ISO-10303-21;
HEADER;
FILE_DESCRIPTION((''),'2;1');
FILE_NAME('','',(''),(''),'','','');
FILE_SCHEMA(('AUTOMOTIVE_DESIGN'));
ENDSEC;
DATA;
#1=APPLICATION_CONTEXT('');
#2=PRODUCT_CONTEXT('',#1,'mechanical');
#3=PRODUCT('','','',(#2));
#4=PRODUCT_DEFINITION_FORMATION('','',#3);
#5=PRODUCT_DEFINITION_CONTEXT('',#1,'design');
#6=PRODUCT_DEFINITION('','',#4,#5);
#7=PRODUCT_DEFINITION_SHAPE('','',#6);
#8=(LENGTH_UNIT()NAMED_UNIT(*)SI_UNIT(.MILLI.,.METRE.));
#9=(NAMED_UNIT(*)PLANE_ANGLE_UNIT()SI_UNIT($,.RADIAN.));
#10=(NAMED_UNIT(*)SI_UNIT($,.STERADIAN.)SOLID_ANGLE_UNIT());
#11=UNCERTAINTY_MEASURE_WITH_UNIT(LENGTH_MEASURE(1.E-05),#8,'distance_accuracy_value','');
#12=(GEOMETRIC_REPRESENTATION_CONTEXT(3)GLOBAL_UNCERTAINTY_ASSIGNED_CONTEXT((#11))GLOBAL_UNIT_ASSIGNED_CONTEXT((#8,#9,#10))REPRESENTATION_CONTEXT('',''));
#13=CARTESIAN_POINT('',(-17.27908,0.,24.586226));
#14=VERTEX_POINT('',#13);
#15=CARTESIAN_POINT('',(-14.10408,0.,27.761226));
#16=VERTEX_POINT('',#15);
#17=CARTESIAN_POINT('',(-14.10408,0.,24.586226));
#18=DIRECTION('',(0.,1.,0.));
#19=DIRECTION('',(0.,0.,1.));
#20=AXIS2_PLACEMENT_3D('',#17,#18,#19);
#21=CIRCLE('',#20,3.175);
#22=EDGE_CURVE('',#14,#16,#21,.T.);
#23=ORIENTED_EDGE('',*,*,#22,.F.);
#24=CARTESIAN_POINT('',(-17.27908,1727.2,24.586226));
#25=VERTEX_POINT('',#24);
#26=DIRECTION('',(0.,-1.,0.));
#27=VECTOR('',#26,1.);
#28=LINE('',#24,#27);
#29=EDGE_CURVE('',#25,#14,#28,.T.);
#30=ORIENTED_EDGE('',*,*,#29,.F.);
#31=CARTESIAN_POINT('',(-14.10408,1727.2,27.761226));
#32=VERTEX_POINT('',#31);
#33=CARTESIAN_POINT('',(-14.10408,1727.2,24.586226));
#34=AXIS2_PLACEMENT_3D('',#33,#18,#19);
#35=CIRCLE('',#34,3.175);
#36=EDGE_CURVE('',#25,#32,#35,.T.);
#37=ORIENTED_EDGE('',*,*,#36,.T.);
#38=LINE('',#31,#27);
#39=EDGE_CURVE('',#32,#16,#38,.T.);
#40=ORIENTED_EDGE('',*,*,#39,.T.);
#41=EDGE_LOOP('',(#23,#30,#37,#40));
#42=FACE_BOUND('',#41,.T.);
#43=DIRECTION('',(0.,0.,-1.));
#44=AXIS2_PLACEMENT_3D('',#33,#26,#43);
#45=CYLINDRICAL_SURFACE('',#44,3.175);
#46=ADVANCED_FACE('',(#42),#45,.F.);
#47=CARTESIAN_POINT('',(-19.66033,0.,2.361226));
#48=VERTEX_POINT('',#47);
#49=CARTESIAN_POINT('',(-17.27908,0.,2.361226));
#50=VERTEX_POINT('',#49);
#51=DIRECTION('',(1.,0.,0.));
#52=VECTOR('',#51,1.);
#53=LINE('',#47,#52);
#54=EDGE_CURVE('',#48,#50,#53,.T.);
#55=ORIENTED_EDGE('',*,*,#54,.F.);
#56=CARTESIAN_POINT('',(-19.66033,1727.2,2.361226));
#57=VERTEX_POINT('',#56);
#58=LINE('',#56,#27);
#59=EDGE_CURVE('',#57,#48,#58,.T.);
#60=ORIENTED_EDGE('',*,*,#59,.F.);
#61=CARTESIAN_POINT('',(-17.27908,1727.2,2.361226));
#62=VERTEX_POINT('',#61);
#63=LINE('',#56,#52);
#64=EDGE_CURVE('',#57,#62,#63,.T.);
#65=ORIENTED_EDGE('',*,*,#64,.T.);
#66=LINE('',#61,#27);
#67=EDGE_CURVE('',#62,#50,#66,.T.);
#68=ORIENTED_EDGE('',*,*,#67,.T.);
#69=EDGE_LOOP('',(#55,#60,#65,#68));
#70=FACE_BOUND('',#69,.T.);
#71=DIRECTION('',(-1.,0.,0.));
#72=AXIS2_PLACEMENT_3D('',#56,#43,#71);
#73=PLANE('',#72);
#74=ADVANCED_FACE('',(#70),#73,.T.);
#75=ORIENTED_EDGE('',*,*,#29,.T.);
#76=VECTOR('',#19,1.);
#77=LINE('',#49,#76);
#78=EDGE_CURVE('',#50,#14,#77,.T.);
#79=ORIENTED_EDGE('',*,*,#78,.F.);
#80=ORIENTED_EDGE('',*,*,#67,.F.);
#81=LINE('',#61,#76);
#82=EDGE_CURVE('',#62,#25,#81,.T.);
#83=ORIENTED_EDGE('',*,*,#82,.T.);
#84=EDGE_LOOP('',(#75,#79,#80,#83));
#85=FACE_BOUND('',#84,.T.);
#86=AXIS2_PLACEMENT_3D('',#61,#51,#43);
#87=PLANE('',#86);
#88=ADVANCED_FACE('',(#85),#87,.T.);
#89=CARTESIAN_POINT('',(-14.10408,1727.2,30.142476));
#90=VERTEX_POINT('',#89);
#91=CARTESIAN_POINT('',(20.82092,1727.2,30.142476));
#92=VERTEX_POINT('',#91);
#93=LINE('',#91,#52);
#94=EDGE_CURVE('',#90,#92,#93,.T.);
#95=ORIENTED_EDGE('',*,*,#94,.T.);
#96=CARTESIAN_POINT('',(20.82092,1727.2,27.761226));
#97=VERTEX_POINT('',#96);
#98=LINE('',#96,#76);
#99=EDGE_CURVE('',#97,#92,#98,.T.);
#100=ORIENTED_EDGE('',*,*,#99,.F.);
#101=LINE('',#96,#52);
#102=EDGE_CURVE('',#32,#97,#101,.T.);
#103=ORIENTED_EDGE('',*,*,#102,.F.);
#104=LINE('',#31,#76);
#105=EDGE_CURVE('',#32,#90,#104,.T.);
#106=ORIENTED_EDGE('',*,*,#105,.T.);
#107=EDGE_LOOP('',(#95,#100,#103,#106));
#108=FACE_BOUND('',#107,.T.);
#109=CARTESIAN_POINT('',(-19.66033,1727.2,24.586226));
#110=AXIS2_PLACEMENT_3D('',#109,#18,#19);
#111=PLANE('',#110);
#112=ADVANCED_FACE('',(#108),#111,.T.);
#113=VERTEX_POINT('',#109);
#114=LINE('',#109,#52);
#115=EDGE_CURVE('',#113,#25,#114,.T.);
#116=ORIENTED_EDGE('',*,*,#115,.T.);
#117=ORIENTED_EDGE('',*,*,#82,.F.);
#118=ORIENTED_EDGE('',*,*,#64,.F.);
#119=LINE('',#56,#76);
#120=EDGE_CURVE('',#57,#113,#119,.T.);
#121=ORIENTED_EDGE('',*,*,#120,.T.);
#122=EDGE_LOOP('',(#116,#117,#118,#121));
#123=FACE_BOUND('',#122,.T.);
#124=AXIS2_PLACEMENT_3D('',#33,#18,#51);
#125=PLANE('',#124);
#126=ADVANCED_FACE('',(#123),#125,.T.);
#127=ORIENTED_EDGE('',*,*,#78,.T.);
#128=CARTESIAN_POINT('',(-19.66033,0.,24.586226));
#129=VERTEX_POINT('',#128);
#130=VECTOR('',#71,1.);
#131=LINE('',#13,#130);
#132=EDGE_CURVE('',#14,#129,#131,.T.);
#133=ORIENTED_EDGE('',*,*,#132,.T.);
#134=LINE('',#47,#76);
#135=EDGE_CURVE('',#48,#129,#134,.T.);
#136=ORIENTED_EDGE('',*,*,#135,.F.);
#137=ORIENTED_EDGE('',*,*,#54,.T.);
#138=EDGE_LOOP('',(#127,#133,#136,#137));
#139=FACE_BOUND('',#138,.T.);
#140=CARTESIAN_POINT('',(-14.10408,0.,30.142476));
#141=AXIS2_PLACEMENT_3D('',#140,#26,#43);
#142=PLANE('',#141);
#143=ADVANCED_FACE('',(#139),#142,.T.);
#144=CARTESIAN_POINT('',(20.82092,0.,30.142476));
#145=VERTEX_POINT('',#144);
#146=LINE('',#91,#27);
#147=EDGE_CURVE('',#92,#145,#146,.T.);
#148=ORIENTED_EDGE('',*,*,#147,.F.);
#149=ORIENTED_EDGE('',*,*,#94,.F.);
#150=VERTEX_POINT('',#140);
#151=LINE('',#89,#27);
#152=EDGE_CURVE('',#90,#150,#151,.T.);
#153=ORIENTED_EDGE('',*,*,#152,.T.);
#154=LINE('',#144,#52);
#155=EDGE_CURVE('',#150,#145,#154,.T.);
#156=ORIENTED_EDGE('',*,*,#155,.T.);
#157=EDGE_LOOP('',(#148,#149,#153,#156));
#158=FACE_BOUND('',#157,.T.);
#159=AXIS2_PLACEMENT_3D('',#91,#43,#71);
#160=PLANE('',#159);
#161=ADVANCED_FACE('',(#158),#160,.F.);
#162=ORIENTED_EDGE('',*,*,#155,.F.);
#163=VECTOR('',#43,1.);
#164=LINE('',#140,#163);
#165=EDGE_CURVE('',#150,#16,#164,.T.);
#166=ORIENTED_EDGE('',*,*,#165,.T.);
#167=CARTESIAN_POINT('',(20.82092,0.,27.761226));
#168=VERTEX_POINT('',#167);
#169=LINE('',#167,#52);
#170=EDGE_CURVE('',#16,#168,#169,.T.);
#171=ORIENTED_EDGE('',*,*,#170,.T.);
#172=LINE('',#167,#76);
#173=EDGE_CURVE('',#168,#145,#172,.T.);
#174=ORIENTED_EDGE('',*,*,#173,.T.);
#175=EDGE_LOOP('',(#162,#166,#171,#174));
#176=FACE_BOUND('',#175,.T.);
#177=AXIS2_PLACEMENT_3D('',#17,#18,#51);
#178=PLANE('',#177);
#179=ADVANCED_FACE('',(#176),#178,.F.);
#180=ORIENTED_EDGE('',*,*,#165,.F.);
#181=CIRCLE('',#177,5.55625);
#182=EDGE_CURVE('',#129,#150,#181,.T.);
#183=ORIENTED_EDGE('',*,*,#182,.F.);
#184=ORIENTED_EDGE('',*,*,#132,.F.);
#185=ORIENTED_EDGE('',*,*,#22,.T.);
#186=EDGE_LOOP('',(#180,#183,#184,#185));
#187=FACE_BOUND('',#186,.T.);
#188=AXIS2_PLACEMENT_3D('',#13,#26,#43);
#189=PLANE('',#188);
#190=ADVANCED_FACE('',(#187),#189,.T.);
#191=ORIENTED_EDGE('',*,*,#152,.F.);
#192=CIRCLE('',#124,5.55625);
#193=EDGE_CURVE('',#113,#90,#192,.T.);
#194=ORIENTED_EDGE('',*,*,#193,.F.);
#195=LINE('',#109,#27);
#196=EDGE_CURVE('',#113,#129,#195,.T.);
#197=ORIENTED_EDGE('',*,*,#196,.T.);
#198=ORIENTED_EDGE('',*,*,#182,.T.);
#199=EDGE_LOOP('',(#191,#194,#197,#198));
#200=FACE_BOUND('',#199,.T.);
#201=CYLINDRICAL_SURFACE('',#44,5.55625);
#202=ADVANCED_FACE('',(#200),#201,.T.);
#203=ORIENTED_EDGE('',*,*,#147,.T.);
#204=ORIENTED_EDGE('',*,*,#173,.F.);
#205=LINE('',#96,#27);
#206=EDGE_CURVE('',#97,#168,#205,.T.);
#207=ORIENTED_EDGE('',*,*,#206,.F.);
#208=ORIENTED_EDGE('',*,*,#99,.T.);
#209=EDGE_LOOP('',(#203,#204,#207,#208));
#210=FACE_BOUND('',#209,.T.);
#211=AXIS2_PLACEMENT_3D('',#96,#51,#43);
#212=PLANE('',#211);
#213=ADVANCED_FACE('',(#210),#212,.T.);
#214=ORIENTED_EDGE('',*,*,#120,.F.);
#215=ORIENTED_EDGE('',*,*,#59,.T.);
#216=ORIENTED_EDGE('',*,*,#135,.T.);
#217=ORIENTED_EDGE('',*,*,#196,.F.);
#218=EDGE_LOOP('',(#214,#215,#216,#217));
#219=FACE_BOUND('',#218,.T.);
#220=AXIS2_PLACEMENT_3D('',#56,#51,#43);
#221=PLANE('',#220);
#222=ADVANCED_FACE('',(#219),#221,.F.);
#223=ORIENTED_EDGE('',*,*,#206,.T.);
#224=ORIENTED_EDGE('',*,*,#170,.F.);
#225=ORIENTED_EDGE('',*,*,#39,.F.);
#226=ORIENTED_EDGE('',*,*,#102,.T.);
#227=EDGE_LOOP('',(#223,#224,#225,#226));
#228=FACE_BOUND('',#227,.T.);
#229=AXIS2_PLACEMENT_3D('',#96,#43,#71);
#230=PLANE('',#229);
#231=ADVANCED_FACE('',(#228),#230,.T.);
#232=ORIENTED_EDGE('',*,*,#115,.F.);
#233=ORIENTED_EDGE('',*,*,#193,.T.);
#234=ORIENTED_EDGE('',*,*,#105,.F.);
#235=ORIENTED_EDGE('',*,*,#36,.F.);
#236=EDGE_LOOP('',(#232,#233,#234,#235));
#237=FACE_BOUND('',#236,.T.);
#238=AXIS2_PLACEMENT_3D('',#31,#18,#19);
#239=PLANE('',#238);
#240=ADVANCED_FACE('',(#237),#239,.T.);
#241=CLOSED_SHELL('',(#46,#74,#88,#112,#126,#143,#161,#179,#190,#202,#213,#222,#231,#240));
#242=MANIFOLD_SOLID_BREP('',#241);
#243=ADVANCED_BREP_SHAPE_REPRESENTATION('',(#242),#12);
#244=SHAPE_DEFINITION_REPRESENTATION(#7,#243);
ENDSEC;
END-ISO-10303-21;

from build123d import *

# Parameters (mm, degrees)
BASE_FLANGE1_DEPTH = 1727.2


# Sheet-metal steps are written as plain solids
with BuildPart() as part:
    # Sketch1 → Base-Flange1 (new body)
    with BuildSketch(Plane(origin=(0, 0, 0), x_dir=(1, 0, 0), z_dir=(0, 1, 0))):
        with BuildLine():
            Line((20.820919871, -27.761226495), (-14.104080129, -27.761226495))
            ThreePointArc((-14.104080129, -27.761226495), (-16.349144159, -26.831290525), (-17.279080129, -24.586226495))
            Line((-17.279080129, -24.586226495), (-17.279080129, -2.361226495))
            Line((-17.279080129, -2.361226495), (-19.660330129, -2.361226495))
            Line((-19.660330129, -2.361226495), (-19.660330129, -24.586226495))
            ThreePointArc((-19.660330129, -24.586226495), (-18.032942182, -28.515088548), (-14.104080129, -30.142476495))
            Line((-14.104080129, -30.142476495), (20.820919871, -30.142476495))
            Line((20.820919871, -30.142476495), (20.820919871, -27.761226495))
        make_face()
    extrude(amount=BASE_FLANGE1_DEPTH)


solid = part.part
